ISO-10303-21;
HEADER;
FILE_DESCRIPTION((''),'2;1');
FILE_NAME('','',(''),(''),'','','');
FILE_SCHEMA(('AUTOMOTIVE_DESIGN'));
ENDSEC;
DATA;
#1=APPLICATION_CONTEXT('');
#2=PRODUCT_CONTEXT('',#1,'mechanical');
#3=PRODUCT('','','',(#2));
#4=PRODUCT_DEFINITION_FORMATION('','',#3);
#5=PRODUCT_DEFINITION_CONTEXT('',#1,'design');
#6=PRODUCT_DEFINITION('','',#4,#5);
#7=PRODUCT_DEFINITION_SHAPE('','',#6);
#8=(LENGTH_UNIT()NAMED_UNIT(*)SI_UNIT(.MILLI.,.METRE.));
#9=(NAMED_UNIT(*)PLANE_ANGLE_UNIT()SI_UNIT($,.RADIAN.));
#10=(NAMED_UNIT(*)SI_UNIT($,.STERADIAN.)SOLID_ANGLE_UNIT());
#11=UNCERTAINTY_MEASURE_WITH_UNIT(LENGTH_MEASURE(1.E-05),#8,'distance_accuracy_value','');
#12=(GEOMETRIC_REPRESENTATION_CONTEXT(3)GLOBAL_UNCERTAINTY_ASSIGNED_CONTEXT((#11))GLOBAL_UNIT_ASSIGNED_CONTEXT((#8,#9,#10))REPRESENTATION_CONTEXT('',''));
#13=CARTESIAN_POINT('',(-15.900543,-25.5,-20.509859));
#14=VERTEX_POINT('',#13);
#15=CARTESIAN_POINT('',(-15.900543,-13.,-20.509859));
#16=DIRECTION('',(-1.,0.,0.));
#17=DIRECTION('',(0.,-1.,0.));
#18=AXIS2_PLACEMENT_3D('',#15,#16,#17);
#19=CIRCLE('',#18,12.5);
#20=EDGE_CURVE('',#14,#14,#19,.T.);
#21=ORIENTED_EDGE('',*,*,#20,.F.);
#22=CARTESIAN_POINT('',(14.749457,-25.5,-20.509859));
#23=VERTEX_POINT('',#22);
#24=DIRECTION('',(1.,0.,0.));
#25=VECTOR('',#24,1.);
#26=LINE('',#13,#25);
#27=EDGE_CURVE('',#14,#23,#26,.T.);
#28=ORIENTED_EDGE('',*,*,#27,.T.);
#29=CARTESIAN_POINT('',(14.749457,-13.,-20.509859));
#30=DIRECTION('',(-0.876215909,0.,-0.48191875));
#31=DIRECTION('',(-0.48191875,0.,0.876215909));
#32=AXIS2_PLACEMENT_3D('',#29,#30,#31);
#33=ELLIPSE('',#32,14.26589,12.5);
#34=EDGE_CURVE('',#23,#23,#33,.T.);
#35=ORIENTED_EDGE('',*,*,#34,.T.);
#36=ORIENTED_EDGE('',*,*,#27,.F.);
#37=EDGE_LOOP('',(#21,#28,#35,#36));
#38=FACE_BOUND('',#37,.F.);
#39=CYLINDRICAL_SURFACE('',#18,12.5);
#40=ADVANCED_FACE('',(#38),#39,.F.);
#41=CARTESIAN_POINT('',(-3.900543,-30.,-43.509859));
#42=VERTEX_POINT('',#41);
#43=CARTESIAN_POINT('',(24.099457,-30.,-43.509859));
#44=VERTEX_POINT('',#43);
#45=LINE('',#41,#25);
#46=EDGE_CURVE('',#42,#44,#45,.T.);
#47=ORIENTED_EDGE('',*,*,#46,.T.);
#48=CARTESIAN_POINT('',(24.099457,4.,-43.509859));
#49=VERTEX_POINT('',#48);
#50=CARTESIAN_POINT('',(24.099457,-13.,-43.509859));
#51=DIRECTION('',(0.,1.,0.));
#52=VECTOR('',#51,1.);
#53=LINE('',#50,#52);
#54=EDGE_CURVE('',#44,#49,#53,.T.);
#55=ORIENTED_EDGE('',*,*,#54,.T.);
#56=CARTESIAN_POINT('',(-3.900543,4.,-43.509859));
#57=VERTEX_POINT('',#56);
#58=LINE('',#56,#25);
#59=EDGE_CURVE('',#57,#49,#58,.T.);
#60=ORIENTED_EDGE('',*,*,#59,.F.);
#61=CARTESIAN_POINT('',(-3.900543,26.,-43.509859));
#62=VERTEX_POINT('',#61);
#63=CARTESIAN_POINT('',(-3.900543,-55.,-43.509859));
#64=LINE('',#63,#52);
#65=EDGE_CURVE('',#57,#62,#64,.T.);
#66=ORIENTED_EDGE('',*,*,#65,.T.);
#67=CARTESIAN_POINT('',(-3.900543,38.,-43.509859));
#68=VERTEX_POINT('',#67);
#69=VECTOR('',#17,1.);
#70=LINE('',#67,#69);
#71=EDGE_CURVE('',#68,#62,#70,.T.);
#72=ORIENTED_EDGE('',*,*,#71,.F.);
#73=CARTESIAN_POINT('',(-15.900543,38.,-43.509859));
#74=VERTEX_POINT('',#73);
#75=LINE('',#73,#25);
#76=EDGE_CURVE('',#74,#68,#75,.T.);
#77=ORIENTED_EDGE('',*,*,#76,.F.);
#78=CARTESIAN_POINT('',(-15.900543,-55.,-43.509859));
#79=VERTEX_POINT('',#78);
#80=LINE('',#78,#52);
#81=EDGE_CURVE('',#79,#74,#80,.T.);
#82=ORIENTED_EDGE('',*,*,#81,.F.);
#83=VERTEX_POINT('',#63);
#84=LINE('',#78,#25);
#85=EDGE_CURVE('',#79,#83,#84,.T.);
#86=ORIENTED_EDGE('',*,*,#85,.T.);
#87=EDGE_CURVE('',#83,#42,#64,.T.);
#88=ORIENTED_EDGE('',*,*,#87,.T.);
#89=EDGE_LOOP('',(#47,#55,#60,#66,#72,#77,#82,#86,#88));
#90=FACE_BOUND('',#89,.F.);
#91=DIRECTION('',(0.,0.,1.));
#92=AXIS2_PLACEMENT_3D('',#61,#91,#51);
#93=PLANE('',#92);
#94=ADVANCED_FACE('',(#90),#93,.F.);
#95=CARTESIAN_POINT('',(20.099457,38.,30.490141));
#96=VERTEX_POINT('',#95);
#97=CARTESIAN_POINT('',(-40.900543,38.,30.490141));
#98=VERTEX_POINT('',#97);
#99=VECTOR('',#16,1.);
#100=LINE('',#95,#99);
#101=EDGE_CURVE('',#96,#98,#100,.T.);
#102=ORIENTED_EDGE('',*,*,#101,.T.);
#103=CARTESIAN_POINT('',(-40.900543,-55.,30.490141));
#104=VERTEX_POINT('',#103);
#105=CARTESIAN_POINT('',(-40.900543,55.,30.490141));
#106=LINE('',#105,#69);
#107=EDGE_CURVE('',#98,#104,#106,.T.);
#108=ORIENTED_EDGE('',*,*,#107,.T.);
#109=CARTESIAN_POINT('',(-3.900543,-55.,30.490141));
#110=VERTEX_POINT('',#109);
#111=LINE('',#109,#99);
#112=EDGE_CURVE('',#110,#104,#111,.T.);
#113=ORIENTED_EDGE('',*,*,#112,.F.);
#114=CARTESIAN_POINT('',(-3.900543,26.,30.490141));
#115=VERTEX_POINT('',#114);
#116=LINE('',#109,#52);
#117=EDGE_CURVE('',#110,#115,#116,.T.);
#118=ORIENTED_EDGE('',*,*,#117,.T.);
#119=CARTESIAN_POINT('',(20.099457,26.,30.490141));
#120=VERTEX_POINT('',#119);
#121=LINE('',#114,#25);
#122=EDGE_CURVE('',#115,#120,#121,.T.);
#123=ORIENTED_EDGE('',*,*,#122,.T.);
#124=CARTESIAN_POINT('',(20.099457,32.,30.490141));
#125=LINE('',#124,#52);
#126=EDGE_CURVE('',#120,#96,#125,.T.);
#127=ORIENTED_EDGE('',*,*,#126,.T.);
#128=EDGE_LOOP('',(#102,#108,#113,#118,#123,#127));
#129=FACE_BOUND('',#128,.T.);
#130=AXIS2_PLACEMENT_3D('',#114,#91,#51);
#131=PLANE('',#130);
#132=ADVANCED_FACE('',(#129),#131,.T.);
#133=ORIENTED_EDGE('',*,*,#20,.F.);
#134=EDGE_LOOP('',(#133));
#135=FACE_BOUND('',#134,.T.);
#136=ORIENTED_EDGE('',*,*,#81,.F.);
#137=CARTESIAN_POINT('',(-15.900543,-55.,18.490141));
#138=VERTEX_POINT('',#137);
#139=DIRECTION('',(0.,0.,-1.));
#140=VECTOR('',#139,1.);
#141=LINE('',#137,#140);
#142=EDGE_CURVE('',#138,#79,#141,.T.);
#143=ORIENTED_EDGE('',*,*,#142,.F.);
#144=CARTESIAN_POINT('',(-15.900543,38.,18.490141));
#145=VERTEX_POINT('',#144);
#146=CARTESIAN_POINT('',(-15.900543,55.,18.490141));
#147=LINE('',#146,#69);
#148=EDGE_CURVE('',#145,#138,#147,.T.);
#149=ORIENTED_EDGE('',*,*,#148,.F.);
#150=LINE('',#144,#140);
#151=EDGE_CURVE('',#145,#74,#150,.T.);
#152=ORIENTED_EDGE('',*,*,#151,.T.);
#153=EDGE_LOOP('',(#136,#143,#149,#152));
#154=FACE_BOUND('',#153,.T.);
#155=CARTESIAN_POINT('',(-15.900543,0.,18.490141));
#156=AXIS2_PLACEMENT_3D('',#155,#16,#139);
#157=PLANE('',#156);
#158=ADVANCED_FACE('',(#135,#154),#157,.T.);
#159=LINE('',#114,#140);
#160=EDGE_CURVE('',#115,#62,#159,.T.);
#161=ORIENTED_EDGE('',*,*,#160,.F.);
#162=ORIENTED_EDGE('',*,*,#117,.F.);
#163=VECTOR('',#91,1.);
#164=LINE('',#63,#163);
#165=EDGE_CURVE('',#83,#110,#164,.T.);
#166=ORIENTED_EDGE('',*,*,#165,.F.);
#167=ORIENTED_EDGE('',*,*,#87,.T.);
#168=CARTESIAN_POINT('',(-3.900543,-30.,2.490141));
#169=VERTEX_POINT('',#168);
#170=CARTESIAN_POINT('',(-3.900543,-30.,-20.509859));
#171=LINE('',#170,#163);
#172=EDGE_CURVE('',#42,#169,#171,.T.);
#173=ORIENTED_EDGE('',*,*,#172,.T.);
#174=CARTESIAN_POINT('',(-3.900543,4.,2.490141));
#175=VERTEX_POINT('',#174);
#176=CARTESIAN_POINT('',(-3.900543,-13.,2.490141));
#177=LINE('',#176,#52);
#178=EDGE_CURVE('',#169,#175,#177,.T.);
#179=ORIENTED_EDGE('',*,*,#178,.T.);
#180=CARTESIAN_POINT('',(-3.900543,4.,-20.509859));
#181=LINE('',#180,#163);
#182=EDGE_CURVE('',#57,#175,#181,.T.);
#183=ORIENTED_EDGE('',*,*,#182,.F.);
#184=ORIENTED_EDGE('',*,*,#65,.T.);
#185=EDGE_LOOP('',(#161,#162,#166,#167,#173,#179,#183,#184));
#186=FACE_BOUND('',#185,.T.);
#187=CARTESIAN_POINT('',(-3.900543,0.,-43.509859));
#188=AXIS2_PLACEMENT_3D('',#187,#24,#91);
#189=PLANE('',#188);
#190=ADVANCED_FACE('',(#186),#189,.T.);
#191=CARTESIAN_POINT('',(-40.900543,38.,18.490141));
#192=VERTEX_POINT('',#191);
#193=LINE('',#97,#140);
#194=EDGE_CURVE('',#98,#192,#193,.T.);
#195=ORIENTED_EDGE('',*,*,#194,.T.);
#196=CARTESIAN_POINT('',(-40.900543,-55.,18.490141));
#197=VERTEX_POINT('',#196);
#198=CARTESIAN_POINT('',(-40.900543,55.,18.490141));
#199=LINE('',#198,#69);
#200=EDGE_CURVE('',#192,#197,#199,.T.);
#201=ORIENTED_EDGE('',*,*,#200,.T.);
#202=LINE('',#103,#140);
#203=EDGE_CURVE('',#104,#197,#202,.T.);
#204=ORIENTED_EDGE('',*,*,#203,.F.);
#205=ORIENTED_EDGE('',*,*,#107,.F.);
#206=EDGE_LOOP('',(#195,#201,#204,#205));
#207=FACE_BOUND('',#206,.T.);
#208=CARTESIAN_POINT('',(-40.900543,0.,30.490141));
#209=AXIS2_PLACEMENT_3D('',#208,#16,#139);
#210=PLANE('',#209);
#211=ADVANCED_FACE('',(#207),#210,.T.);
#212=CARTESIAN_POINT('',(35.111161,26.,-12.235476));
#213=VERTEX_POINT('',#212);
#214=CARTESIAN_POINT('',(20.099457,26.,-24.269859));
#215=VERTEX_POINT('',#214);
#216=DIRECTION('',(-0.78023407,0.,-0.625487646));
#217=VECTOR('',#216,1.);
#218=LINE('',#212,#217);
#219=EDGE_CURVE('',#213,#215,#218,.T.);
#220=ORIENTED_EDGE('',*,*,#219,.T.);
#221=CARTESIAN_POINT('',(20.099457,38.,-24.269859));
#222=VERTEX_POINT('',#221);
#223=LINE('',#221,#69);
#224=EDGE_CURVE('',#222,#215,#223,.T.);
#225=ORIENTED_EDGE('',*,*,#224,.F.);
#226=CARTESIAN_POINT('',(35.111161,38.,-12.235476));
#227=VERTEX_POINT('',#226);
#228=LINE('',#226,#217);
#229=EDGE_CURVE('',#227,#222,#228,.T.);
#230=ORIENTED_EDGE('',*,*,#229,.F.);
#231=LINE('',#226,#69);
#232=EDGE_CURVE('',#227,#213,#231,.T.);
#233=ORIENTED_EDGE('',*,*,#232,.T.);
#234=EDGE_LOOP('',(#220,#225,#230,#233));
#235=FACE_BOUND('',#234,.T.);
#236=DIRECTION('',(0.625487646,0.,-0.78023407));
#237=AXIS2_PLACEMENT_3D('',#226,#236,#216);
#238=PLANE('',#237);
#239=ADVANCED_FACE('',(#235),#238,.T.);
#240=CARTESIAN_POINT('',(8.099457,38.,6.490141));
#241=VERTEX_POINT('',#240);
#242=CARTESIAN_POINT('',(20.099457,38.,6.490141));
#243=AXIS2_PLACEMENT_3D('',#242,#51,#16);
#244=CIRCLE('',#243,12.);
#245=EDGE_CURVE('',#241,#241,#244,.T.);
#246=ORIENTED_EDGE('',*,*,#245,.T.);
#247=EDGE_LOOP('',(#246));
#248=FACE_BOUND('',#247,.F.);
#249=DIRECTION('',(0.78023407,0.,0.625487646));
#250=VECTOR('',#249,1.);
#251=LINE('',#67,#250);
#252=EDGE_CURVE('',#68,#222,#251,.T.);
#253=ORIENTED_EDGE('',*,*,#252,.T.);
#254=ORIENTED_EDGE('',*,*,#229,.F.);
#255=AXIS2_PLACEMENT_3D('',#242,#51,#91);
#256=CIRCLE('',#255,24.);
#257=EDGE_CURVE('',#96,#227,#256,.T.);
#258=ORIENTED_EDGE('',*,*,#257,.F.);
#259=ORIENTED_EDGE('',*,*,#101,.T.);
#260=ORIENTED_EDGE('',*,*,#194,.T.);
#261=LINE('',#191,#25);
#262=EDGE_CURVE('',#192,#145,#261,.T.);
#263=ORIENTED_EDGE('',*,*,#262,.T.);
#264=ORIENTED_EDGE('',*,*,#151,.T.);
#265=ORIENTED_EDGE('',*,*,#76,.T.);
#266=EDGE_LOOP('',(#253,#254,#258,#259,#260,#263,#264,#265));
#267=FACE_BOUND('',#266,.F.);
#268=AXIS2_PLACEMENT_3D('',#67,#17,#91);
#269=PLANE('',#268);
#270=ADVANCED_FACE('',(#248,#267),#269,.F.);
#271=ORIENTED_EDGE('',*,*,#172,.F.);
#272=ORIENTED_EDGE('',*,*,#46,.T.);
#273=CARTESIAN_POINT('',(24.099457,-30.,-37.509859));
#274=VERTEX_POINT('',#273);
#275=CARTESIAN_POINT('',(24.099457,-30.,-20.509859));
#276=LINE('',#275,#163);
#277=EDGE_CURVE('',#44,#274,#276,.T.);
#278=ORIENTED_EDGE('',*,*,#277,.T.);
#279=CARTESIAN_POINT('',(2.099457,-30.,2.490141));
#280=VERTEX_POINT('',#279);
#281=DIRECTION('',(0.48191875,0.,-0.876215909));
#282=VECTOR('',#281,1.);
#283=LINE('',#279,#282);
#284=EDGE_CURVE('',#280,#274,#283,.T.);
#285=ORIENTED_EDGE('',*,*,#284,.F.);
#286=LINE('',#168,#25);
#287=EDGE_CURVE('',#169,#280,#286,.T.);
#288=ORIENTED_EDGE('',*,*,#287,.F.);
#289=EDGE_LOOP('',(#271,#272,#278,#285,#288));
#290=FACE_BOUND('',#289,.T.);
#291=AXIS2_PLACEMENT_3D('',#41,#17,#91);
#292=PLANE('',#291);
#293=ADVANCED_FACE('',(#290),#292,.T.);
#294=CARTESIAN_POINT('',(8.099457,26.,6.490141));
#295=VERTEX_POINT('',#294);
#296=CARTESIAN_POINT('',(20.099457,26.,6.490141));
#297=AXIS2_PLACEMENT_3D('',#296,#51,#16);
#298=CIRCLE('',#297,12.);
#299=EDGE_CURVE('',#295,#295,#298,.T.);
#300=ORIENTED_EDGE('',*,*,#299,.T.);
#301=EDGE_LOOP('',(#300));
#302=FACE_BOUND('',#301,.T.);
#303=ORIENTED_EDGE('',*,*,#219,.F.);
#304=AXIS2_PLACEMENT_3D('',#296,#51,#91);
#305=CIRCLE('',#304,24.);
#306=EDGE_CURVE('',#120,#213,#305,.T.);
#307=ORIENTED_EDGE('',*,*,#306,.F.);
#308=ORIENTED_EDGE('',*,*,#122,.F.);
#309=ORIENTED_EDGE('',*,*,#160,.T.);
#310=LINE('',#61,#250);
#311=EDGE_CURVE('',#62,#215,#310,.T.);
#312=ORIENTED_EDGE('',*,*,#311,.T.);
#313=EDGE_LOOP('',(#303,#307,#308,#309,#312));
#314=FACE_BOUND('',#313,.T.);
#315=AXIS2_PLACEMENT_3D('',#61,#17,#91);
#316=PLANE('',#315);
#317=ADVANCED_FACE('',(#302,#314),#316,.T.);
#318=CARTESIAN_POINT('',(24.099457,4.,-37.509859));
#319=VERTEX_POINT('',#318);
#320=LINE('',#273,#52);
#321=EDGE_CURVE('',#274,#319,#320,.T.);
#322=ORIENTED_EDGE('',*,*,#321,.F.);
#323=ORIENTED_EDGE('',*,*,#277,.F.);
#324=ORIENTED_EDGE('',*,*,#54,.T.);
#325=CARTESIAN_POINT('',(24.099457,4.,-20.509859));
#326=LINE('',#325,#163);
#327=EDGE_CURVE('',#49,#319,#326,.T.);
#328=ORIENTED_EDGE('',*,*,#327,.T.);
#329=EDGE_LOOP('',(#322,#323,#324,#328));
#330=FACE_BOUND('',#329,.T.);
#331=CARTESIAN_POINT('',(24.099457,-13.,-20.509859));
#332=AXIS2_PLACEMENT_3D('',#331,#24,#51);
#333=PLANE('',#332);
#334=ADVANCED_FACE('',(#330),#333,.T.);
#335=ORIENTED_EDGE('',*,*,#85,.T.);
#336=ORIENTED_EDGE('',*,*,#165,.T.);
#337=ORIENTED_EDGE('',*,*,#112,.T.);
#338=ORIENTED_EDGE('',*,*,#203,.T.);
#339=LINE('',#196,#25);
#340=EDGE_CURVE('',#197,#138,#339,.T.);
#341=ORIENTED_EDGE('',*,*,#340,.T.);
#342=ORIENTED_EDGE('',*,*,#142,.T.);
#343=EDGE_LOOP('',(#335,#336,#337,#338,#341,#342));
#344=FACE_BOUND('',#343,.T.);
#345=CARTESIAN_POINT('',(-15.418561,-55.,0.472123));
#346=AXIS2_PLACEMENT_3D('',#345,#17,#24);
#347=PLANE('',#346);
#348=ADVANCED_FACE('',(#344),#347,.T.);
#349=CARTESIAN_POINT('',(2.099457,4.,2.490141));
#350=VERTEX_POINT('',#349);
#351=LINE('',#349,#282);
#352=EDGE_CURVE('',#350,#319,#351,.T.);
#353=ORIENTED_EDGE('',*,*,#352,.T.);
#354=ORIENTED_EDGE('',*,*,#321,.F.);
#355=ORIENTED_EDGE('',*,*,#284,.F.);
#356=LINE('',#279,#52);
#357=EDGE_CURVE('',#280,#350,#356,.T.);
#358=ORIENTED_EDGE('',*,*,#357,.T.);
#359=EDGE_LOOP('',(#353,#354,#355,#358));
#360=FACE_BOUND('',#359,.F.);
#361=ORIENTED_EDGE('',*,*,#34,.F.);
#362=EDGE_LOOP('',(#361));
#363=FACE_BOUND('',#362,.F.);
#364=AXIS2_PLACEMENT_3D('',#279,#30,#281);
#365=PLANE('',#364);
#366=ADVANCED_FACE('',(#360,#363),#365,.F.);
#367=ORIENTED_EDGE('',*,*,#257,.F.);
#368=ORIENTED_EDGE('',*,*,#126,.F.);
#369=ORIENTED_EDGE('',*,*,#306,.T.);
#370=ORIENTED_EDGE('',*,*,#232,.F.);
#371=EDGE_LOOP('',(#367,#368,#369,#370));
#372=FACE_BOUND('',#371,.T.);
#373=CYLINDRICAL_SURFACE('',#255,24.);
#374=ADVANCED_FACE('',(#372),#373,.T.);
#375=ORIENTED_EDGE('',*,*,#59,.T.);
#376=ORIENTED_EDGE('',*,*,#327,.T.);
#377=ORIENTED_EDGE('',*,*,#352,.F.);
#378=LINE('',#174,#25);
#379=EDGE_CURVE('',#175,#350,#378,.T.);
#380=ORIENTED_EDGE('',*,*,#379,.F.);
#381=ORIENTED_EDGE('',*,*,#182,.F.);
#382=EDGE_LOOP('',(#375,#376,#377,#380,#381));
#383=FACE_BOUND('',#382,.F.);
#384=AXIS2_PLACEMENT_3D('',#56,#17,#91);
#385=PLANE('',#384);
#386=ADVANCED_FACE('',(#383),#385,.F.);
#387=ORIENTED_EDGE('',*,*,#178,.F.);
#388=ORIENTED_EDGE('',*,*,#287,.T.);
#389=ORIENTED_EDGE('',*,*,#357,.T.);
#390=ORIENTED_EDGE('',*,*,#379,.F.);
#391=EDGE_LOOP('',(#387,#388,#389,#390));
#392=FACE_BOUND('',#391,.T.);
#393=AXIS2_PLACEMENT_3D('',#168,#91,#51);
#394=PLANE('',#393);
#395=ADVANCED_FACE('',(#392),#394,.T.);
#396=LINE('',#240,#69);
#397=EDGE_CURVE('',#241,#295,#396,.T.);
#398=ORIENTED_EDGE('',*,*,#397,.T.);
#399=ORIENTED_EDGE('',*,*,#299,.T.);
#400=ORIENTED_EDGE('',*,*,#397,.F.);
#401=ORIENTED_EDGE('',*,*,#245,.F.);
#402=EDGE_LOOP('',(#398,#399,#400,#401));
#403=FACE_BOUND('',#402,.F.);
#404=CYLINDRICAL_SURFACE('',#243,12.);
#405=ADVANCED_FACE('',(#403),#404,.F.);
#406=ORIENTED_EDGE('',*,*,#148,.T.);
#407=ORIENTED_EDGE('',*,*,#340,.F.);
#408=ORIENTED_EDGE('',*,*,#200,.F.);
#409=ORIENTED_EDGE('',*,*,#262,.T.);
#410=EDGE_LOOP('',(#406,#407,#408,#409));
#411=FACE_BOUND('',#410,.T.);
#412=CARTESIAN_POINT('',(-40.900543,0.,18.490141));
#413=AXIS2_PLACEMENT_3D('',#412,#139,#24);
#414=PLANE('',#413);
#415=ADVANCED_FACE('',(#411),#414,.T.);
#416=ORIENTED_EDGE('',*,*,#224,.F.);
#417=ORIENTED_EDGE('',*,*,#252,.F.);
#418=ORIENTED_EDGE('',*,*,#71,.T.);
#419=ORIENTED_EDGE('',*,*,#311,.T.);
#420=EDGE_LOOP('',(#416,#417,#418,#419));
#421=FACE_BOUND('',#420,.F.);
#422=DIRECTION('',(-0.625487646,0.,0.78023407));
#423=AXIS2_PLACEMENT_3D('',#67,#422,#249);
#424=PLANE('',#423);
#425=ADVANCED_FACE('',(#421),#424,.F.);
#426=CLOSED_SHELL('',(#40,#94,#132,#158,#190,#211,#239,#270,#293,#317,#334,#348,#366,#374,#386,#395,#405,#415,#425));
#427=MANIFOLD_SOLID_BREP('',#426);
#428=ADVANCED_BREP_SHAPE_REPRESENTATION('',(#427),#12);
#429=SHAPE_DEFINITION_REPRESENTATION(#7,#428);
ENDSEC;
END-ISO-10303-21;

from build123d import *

# Parameters (mm, degrees)
F1_DEPTH  = 55
F2_W      = 34
F2_H      = 46
F3_DEPTH  = 28
F5_DEPTH  = 34
F6_R      = 12.5
F8_DEPTH  = 100
F10_DEPTH = 17
F11_W     = 12
F11_H     = 74
F12_DEPTH = 24
F14_DEPTH = 12
F15_DEPTH = 12
F16_R     = 12
F17_DEPTH = 25


# Not quite as in the source:
# - a feature of the source that left no trace in its solid (it failed there, or was rolled back) is left out


with BuildPart() as f1:
    # F0 (on Front) → F1 (new body, symmetric)
    with BuildSketch(Plane.XZ):
        Polygon((-3.9005428076, 30.4901414615), (-40.9005428076, 30.4901414615), (-40.9005428076, 18.4901414615), (-15.9005428076, 18.4901414615), (-15.9005428076, -43.5098585385), (-3.9005428076, -43.5098585385), align=None)
    extrude(amount=F1_DEPTH, both=True)

    # F2 (on face) → F3 (join)
    with BuildSketch(Plane.YZ.offset(-3.9005428076)):
        with Locations((-13, -20.5098585385)):
            Rectangle(F2_W, F2_H)
    extrude(amount=F3_DEPTH)

    # F4 (on face) → F5 (cut)
    with BuildSketch(Plane.XZ.offset(30)):
        Polygon((24.0994571924, 2.4901414615), (2.0994571924, 2.4901414615), (24.0994571924, -37.5098585385), align=None)
    extrude(amount=-F5_DEPTH, mode=Mode.SUBTRACT)

    # F6 (on face) → F8 (cut)
    with BuildSketch(Plane(origin=(-15.9005428076, 0, 0), x_dir=(0, -1, 0), z_dir=(-1, 0, 0))):
        with Locations((13, -20.5098585385)):
            Circle(F6_R)
    extrude(amount=-F8_DEPTH, mode=Mode.SUBTRACT)

    # F10 (cut): a face of the model
    f10_faces = [f1.faces().sort_by_distance(p)[0] for p in [
        (-14.5722599793, 55, 1.3184242898),
    ]]
    extrude(f10_faces, amount=-F10_DEPTH, mode=Mode.SUBTRACT)

    # F11 (on face) → F12 (join)
    with BuildSketch(Plane.YZ.offset(-3.9005428076)):
        with Locations((32, -6.5098585385)):
            Rectangle(F11_W, F11_H)
    extrude(amount=F12_DEPTH)

    # F13 (on face) → F14 (cut)
    with BuildSketch(Plane(origin=(0, 38, 0), x_dir=(-1, 0, 0), z_dir=(0, 1, 0))):
        with BuildLine():
            ThreePointArc((-20.0994571924, -17.5098585385), (-28.0551210727, -16.1529018901), (-35.1111607034, -12.2354762238))
            Line((-35.1111607034, -12.2354762238), (-20.0994571924, -24.2698585385))
            Line((-20.0994571924, -24.2698585385), (-20.0994571924, -17.5098585385))
        make_face()
        Polygon((3.9005428076, -43.5098585385), (-20.0994571924, -24.2698585385), (-20.0994571924, -43.5098585385), align=None)
    extrude(amount=-F14_DEPTH, mode=Mode.SUBTRACT)

    # F13 (on face) → F15 (join)
    with BuildSketch(Plane(origin=(0, 38, 0), x_dir=(-1, 0, 0), z_dir=(0, 1, 0))):
        with BuildLine():
            ThreePointArc((-35.1111607034, -12.2354762238), (-9.7139115703, -15.1464119177), (3.9005428076, 6.4901414615))
            ThreePointArc((3.9005428076, 6.4901414615), (-3.1288944439, 23.46070421), (-20.0994571924, 30.4901414615))
            ThreePointArc((-20.0994571924, 30.4901414615), (-42.742500544, 14.4458053418), (-35.1111607034, -12.2354762238))
        make_face()
        with BuildLine():
            ThreePointArc((-20.0994571924, -17.5098585385), (-28.0551210727, -16.1529018901), (-35.1111607034, -12.2354762238))
            Line((-35.1111607034, -12.2354762238), (-20.0994571924, -24.2698585385))
            Line((-20.0994571924, -24.2698585385), (-20.0994571924, -17.5098585385))
        make_face()
    extrude(amount=-F15_DEPTH)

    # F16 (on face) → F17 (cut)
    with BuildSketch(Plane(origin=(0, 38, 0), x_dir=(-1, 0, 0), z_dir=(0, 1, 0))):
        with Locations((-20.0994571924, 6.4901414615)):
            Circle(F16_R)
    extrude(amount=-F17_DEPTH, mode=Mode.SUBTRACT)


solid = f1.part
